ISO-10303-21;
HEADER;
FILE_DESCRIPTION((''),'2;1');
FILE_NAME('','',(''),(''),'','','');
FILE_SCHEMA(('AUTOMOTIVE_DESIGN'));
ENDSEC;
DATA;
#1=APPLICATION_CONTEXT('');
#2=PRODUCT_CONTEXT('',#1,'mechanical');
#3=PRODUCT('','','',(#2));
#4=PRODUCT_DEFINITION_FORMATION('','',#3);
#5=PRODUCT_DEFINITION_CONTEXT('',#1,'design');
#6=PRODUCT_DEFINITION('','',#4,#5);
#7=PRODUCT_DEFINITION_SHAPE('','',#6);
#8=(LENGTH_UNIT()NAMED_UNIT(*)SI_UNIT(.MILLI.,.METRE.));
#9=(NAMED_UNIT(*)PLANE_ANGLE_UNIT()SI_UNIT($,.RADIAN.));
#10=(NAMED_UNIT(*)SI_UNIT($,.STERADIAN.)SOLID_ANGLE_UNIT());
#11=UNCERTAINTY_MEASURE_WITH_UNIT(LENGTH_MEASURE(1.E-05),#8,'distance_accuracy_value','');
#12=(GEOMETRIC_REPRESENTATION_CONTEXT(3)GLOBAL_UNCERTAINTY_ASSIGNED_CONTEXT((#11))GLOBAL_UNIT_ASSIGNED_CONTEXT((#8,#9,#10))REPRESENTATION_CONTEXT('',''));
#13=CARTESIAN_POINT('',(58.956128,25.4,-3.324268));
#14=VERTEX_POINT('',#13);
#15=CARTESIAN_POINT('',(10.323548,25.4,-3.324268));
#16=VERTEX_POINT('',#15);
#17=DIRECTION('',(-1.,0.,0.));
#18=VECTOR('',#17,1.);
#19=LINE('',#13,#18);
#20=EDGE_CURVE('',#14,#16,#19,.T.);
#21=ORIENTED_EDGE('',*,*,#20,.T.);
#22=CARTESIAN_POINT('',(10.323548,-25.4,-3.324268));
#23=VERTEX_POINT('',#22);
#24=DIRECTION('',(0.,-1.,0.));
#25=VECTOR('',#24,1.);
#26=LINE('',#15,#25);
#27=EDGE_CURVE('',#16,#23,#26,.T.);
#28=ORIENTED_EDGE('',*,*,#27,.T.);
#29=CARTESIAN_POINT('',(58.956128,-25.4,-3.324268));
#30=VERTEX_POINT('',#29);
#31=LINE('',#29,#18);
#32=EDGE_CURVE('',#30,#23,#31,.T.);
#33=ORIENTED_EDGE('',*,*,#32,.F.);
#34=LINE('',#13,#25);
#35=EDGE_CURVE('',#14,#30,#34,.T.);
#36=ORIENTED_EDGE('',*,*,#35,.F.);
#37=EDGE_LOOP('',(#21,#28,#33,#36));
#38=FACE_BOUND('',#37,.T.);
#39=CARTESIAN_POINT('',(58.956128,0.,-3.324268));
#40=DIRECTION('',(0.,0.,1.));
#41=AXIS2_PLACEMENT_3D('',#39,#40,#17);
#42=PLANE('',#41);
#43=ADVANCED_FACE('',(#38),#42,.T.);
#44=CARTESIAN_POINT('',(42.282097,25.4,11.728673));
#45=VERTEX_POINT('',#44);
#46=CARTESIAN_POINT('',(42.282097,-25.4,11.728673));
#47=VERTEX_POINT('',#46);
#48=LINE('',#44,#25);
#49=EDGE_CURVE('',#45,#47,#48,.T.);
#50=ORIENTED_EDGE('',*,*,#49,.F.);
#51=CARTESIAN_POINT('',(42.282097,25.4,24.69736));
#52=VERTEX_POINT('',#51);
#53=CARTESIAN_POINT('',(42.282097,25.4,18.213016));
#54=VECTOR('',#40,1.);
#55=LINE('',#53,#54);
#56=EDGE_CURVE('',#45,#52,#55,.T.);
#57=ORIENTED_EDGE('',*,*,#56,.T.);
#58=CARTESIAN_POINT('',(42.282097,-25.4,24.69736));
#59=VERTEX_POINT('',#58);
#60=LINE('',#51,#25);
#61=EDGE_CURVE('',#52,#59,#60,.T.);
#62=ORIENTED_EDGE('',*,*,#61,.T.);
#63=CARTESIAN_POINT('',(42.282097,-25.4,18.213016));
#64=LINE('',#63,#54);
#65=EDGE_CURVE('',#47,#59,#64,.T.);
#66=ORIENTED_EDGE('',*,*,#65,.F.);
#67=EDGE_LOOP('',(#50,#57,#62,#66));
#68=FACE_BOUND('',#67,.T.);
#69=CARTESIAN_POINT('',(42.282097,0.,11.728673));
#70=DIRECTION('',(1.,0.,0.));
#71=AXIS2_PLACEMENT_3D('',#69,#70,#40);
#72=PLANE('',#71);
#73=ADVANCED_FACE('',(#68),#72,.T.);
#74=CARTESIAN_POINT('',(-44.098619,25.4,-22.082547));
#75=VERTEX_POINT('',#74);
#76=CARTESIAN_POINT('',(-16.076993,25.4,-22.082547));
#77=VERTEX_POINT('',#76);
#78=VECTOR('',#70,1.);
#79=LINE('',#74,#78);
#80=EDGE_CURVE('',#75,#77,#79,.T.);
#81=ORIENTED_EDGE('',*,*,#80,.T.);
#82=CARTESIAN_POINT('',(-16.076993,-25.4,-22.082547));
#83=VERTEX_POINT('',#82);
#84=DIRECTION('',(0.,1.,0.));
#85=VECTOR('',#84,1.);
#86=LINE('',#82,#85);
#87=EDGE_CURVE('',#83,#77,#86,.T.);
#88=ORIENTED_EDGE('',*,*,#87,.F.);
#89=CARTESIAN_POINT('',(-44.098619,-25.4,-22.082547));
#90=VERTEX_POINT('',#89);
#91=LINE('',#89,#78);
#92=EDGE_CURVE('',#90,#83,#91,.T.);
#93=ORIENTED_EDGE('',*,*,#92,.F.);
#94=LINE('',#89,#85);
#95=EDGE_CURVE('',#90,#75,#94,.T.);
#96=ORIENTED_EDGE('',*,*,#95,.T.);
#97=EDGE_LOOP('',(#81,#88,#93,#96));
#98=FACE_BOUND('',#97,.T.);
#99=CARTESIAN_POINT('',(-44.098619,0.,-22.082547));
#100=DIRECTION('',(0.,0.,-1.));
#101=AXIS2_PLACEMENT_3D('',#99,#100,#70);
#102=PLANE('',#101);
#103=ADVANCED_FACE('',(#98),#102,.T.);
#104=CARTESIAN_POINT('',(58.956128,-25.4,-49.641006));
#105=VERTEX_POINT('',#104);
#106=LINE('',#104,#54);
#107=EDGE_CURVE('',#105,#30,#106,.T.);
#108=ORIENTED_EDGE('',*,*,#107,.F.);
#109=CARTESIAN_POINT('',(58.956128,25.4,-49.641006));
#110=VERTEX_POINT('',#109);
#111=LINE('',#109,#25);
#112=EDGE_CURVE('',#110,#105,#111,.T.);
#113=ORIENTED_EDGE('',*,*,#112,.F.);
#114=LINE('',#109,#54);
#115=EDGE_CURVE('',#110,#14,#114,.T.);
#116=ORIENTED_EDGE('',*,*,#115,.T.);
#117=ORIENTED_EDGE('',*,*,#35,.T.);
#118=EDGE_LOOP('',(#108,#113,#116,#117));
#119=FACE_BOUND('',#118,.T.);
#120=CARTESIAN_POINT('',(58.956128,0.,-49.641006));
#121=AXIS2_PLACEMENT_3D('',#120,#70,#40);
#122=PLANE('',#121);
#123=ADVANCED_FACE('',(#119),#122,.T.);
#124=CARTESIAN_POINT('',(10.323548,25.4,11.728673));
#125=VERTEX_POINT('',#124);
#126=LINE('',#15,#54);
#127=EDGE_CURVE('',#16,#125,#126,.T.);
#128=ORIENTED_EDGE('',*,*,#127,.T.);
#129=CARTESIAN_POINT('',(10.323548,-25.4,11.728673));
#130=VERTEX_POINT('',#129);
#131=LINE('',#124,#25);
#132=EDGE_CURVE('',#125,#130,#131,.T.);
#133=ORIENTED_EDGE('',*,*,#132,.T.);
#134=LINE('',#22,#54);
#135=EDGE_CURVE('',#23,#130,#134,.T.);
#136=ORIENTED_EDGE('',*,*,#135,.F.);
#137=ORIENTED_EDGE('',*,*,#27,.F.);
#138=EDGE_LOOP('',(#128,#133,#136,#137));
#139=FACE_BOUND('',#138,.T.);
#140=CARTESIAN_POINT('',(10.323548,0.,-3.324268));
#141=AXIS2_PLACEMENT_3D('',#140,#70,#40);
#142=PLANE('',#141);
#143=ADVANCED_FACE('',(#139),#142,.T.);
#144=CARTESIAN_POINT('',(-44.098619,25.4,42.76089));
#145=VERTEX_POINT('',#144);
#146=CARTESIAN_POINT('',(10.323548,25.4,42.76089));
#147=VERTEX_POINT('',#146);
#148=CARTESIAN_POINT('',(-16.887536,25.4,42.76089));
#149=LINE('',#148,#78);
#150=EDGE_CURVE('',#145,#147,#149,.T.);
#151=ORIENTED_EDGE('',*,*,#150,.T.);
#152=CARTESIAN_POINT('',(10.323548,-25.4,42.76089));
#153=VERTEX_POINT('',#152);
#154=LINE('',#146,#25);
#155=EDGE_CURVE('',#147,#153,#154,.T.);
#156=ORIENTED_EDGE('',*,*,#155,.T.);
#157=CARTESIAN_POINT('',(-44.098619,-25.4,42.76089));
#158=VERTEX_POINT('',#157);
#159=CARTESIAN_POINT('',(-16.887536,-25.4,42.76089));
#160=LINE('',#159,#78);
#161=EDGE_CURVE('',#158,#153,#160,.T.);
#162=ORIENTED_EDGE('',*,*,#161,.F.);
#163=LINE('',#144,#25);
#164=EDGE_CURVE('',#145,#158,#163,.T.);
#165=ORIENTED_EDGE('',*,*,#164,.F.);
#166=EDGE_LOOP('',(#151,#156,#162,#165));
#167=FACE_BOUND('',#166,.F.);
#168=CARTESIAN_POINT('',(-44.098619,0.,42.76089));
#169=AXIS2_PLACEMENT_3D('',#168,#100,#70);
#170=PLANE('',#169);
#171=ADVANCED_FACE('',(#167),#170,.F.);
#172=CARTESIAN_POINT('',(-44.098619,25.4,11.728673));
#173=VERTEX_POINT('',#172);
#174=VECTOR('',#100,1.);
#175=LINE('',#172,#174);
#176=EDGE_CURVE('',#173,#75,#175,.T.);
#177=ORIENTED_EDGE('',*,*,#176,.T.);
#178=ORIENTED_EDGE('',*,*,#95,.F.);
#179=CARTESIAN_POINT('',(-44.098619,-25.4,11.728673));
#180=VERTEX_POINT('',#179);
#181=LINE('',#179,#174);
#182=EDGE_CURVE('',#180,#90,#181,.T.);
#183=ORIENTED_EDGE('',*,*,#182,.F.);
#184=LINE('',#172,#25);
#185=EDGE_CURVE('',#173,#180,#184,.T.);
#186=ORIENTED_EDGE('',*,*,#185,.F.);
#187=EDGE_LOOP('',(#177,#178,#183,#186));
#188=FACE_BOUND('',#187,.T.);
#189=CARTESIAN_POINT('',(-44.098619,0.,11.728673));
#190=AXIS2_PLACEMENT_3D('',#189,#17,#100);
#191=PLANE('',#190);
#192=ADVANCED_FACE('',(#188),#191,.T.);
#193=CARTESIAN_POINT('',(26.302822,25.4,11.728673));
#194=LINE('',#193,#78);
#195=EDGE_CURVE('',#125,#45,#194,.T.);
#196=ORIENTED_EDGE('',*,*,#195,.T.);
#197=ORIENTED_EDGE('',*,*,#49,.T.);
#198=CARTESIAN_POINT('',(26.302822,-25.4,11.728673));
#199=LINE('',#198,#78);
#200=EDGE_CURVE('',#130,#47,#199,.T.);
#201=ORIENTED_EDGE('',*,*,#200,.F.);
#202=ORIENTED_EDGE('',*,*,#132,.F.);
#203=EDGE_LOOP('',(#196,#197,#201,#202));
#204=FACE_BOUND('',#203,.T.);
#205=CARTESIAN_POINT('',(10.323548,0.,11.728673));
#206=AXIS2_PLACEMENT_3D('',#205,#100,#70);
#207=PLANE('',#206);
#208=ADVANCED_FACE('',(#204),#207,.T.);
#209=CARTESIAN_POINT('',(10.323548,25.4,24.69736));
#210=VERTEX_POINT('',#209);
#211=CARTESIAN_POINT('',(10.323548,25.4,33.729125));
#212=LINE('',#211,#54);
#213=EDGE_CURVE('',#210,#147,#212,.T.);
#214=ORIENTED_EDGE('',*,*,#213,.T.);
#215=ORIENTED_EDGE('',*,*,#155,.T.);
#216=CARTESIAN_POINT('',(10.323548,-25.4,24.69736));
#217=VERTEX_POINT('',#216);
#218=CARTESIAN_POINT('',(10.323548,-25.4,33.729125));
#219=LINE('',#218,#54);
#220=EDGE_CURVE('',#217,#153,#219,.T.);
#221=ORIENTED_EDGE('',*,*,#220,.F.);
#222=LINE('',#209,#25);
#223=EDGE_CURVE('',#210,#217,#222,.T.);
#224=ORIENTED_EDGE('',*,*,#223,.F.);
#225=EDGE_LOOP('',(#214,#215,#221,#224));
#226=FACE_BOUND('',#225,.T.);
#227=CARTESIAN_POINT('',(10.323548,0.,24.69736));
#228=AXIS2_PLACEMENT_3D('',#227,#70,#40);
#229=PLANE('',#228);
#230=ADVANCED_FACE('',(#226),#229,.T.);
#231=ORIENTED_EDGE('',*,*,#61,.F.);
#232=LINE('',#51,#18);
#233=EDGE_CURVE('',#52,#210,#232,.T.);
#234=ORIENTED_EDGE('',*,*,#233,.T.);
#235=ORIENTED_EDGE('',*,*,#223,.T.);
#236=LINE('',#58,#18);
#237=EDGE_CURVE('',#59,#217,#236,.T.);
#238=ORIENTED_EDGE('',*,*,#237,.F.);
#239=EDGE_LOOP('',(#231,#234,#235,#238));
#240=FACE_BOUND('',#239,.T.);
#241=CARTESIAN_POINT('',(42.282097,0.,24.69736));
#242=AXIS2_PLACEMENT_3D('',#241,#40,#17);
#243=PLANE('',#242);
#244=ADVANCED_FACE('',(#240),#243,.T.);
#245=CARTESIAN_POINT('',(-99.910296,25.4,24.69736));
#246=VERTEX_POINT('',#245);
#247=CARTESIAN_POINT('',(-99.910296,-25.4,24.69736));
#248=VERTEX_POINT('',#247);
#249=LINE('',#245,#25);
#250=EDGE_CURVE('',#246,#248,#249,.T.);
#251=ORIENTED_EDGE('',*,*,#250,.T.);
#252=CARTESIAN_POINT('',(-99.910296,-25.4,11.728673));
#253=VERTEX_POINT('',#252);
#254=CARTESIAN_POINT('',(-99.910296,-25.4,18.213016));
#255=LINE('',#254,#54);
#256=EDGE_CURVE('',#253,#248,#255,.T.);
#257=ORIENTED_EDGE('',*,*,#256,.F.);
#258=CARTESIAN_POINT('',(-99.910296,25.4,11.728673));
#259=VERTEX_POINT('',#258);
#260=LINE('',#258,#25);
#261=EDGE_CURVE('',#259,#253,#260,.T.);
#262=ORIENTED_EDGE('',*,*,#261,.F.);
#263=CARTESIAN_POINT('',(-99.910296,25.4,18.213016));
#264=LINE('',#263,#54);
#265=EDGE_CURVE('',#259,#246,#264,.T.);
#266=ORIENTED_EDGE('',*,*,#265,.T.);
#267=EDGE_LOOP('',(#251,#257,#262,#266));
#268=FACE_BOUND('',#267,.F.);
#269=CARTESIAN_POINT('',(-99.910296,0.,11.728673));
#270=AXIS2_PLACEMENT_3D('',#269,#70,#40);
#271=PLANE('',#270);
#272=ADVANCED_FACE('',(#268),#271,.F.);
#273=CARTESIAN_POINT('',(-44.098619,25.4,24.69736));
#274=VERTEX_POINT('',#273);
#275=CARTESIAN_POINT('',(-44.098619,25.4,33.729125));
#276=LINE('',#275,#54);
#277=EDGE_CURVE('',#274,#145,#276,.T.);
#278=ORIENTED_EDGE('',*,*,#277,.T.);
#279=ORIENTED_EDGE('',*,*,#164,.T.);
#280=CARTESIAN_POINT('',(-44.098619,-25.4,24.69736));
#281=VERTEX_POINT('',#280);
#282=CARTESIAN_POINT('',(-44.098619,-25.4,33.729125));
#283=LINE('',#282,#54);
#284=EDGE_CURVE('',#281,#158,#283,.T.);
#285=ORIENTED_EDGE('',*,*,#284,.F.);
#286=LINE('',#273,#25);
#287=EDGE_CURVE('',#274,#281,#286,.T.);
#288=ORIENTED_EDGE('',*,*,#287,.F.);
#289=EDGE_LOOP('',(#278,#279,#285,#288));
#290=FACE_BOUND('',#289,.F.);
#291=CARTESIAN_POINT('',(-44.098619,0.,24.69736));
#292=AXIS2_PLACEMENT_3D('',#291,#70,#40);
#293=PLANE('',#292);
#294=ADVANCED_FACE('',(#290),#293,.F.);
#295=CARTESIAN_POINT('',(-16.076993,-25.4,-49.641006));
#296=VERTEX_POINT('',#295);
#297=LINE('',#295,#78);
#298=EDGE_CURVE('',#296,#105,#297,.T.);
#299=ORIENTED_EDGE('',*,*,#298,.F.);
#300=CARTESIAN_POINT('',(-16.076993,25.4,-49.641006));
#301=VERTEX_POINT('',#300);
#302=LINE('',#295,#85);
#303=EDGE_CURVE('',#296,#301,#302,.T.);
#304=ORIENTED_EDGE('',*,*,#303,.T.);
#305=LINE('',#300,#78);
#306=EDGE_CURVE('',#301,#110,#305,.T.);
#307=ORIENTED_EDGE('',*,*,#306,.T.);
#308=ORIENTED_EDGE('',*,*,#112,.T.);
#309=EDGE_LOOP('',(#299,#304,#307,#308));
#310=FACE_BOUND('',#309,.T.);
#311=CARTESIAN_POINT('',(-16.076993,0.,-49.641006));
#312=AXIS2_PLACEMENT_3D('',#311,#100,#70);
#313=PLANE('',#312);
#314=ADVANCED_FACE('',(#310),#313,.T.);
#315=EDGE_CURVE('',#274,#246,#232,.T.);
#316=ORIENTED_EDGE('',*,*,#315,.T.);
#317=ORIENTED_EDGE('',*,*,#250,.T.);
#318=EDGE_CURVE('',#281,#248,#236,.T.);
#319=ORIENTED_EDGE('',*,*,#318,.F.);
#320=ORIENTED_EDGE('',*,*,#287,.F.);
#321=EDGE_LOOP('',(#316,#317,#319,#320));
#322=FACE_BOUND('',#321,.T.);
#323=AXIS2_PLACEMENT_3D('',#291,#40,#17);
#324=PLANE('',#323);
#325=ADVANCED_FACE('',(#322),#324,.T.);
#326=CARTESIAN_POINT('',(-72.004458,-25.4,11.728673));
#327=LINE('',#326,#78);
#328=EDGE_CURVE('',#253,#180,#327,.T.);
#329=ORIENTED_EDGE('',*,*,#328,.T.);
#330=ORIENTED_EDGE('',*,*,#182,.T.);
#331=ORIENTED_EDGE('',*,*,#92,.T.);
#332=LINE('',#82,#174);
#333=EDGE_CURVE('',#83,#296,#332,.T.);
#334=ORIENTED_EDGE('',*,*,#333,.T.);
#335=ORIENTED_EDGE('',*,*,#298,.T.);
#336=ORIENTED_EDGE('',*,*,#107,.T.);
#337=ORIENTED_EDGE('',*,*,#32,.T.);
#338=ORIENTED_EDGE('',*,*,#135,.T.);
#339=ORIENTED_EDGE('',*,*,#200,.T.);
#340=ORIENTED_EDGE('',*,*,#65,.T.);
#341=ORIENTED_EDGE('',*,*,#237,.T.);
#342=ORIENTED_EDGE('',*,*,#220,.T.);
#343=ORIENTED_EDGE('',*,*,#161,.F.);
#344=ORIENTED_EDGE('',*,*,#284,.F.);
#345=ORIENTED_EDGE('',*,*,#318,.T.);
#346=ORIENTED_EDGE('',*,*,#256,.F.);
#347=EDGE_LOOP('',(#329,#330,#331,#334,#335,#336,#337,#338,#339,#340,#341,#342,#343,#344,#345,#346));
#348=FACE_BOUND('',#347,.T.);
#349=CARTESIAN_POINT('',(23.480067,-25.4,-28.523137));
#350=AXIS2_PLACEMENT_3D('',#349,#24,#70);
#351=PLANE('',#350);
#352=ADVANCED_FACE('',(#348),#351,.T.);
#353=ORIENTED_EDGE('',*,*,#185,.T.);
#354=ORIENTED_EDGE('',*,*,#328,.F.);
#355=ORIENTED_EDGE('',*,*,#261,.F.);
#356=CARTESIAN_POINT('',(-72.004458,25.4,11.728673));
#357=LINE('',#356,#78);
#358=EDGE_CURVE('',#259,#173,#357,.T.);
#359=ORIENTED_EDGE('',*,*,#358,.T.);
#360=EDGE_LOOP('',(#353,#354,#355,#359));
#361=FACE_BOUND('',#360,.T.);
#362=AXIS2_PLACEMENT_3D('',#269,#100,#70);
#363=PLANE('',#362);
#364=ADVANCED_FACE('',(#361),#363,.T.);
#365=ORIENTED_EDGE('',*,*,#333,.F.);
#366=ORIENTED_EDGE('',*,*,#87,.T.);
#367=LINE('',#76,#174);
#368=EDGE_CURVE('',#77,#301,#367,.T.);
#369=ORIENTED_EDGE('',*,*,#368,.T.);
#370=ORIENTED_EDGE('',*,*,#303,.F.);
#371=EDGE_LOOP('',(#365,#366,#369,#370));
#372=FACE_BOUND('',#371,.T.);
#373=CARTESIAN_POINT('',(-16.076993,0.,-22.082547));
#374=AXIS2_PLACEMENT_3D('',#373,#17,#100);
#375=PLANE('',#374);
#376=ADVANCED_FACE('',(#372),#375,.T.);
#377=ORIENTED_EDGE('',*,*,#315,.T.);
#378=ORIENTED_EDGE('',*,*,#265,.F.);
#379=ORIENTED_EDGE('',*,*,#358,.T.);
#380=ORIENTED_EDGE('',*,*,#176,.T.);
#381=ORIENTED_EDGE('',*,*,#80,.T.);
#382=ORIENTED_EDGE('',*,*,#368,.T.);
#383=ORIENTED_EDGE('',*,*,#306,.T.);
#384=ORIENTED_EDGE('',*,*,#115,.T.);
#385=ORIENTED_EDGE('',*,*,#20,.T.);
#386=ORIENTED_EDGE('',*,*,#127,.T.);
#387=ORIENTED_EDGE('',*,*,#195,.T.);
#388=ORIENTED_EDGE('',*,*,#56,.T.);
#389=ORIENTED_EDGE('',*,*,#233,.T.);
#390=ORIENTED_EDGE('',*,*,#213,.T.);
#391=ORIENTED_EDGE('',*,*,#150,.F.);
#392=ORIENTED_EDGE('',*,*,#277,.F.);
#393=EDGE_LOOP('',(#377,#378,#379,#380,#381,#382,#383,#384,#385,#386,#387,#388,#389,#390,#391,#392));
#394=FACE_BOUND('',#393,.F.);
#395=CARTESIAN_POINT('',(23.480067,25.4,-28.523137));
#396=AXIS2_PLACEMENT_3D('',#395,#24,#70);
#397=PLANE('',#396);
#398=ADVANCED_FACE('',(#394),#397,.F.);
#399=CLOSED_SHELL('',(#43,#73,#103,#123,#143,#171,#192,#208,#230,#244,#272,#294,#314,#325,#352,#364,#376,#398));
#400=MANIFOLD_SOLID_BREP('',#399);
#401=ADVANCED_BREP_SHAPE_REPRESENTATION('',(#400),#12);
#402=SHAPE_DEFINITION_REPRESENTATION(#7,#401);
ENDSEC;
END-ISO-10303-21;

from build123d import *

# Parameters (mm, degrees)
F0_W     = 26.4005409554
F0_H     = 18.7582788058
F0_W_2   = 54.4221671298
F0_H_2   = 12.9686864093
F0_W_3   = 31.9585492834
F0_W_4   = 55.8116771281
F0_H_3   = 18.0635303259
F1_DEPTH = 25.4


with BuildPart() as f1:
    # F0 (on Front) → F1 (new body, symmetric)
    with BuildSketch(Plane.XZ):
        Polygon((-16.0769931972, -49.6410056949), (58.9561276138, -49.6410056949), (58.9561276138, -3.3242679201), (10.3235477582, -3.3242679201), (10.3235477582, -22.0825467259), (-16.0769931972, -22.0825467259), align=None)
        Polygon((-44.0986193717, -22.0825467259), (-16.0769931972, -22.0825467259), (-16.0769931972, -3.3242679201), (10.3235477582, -3.3242679201), (10.3235477582, 11.728673242), (-44.0986193717, 11.728673242), align=None)
        with Locations((-2.8767227195, -12.703407323)):
            Rectangle(F0_W, F0_H)
        with Locations((-16.8875358067, 18.2130164467)):
            Rectangle(F0_W_2, F0_H_2)
        with Locations((26.3028223999, 18.2130164467)):
            Rectangle(F0_W_3, F0_H_2)
        with Locations((-72.0044579357, 18.2130164467)):
            Rectangle(F0_W_4, F0_H_2)
        with Locations((-16.8875358067, 33.7291248143)):
            Rectangle(F0_W_2, F0_H_3)
    extrude(amount=F1_DEPTH, both=True)


solid = f1.part
